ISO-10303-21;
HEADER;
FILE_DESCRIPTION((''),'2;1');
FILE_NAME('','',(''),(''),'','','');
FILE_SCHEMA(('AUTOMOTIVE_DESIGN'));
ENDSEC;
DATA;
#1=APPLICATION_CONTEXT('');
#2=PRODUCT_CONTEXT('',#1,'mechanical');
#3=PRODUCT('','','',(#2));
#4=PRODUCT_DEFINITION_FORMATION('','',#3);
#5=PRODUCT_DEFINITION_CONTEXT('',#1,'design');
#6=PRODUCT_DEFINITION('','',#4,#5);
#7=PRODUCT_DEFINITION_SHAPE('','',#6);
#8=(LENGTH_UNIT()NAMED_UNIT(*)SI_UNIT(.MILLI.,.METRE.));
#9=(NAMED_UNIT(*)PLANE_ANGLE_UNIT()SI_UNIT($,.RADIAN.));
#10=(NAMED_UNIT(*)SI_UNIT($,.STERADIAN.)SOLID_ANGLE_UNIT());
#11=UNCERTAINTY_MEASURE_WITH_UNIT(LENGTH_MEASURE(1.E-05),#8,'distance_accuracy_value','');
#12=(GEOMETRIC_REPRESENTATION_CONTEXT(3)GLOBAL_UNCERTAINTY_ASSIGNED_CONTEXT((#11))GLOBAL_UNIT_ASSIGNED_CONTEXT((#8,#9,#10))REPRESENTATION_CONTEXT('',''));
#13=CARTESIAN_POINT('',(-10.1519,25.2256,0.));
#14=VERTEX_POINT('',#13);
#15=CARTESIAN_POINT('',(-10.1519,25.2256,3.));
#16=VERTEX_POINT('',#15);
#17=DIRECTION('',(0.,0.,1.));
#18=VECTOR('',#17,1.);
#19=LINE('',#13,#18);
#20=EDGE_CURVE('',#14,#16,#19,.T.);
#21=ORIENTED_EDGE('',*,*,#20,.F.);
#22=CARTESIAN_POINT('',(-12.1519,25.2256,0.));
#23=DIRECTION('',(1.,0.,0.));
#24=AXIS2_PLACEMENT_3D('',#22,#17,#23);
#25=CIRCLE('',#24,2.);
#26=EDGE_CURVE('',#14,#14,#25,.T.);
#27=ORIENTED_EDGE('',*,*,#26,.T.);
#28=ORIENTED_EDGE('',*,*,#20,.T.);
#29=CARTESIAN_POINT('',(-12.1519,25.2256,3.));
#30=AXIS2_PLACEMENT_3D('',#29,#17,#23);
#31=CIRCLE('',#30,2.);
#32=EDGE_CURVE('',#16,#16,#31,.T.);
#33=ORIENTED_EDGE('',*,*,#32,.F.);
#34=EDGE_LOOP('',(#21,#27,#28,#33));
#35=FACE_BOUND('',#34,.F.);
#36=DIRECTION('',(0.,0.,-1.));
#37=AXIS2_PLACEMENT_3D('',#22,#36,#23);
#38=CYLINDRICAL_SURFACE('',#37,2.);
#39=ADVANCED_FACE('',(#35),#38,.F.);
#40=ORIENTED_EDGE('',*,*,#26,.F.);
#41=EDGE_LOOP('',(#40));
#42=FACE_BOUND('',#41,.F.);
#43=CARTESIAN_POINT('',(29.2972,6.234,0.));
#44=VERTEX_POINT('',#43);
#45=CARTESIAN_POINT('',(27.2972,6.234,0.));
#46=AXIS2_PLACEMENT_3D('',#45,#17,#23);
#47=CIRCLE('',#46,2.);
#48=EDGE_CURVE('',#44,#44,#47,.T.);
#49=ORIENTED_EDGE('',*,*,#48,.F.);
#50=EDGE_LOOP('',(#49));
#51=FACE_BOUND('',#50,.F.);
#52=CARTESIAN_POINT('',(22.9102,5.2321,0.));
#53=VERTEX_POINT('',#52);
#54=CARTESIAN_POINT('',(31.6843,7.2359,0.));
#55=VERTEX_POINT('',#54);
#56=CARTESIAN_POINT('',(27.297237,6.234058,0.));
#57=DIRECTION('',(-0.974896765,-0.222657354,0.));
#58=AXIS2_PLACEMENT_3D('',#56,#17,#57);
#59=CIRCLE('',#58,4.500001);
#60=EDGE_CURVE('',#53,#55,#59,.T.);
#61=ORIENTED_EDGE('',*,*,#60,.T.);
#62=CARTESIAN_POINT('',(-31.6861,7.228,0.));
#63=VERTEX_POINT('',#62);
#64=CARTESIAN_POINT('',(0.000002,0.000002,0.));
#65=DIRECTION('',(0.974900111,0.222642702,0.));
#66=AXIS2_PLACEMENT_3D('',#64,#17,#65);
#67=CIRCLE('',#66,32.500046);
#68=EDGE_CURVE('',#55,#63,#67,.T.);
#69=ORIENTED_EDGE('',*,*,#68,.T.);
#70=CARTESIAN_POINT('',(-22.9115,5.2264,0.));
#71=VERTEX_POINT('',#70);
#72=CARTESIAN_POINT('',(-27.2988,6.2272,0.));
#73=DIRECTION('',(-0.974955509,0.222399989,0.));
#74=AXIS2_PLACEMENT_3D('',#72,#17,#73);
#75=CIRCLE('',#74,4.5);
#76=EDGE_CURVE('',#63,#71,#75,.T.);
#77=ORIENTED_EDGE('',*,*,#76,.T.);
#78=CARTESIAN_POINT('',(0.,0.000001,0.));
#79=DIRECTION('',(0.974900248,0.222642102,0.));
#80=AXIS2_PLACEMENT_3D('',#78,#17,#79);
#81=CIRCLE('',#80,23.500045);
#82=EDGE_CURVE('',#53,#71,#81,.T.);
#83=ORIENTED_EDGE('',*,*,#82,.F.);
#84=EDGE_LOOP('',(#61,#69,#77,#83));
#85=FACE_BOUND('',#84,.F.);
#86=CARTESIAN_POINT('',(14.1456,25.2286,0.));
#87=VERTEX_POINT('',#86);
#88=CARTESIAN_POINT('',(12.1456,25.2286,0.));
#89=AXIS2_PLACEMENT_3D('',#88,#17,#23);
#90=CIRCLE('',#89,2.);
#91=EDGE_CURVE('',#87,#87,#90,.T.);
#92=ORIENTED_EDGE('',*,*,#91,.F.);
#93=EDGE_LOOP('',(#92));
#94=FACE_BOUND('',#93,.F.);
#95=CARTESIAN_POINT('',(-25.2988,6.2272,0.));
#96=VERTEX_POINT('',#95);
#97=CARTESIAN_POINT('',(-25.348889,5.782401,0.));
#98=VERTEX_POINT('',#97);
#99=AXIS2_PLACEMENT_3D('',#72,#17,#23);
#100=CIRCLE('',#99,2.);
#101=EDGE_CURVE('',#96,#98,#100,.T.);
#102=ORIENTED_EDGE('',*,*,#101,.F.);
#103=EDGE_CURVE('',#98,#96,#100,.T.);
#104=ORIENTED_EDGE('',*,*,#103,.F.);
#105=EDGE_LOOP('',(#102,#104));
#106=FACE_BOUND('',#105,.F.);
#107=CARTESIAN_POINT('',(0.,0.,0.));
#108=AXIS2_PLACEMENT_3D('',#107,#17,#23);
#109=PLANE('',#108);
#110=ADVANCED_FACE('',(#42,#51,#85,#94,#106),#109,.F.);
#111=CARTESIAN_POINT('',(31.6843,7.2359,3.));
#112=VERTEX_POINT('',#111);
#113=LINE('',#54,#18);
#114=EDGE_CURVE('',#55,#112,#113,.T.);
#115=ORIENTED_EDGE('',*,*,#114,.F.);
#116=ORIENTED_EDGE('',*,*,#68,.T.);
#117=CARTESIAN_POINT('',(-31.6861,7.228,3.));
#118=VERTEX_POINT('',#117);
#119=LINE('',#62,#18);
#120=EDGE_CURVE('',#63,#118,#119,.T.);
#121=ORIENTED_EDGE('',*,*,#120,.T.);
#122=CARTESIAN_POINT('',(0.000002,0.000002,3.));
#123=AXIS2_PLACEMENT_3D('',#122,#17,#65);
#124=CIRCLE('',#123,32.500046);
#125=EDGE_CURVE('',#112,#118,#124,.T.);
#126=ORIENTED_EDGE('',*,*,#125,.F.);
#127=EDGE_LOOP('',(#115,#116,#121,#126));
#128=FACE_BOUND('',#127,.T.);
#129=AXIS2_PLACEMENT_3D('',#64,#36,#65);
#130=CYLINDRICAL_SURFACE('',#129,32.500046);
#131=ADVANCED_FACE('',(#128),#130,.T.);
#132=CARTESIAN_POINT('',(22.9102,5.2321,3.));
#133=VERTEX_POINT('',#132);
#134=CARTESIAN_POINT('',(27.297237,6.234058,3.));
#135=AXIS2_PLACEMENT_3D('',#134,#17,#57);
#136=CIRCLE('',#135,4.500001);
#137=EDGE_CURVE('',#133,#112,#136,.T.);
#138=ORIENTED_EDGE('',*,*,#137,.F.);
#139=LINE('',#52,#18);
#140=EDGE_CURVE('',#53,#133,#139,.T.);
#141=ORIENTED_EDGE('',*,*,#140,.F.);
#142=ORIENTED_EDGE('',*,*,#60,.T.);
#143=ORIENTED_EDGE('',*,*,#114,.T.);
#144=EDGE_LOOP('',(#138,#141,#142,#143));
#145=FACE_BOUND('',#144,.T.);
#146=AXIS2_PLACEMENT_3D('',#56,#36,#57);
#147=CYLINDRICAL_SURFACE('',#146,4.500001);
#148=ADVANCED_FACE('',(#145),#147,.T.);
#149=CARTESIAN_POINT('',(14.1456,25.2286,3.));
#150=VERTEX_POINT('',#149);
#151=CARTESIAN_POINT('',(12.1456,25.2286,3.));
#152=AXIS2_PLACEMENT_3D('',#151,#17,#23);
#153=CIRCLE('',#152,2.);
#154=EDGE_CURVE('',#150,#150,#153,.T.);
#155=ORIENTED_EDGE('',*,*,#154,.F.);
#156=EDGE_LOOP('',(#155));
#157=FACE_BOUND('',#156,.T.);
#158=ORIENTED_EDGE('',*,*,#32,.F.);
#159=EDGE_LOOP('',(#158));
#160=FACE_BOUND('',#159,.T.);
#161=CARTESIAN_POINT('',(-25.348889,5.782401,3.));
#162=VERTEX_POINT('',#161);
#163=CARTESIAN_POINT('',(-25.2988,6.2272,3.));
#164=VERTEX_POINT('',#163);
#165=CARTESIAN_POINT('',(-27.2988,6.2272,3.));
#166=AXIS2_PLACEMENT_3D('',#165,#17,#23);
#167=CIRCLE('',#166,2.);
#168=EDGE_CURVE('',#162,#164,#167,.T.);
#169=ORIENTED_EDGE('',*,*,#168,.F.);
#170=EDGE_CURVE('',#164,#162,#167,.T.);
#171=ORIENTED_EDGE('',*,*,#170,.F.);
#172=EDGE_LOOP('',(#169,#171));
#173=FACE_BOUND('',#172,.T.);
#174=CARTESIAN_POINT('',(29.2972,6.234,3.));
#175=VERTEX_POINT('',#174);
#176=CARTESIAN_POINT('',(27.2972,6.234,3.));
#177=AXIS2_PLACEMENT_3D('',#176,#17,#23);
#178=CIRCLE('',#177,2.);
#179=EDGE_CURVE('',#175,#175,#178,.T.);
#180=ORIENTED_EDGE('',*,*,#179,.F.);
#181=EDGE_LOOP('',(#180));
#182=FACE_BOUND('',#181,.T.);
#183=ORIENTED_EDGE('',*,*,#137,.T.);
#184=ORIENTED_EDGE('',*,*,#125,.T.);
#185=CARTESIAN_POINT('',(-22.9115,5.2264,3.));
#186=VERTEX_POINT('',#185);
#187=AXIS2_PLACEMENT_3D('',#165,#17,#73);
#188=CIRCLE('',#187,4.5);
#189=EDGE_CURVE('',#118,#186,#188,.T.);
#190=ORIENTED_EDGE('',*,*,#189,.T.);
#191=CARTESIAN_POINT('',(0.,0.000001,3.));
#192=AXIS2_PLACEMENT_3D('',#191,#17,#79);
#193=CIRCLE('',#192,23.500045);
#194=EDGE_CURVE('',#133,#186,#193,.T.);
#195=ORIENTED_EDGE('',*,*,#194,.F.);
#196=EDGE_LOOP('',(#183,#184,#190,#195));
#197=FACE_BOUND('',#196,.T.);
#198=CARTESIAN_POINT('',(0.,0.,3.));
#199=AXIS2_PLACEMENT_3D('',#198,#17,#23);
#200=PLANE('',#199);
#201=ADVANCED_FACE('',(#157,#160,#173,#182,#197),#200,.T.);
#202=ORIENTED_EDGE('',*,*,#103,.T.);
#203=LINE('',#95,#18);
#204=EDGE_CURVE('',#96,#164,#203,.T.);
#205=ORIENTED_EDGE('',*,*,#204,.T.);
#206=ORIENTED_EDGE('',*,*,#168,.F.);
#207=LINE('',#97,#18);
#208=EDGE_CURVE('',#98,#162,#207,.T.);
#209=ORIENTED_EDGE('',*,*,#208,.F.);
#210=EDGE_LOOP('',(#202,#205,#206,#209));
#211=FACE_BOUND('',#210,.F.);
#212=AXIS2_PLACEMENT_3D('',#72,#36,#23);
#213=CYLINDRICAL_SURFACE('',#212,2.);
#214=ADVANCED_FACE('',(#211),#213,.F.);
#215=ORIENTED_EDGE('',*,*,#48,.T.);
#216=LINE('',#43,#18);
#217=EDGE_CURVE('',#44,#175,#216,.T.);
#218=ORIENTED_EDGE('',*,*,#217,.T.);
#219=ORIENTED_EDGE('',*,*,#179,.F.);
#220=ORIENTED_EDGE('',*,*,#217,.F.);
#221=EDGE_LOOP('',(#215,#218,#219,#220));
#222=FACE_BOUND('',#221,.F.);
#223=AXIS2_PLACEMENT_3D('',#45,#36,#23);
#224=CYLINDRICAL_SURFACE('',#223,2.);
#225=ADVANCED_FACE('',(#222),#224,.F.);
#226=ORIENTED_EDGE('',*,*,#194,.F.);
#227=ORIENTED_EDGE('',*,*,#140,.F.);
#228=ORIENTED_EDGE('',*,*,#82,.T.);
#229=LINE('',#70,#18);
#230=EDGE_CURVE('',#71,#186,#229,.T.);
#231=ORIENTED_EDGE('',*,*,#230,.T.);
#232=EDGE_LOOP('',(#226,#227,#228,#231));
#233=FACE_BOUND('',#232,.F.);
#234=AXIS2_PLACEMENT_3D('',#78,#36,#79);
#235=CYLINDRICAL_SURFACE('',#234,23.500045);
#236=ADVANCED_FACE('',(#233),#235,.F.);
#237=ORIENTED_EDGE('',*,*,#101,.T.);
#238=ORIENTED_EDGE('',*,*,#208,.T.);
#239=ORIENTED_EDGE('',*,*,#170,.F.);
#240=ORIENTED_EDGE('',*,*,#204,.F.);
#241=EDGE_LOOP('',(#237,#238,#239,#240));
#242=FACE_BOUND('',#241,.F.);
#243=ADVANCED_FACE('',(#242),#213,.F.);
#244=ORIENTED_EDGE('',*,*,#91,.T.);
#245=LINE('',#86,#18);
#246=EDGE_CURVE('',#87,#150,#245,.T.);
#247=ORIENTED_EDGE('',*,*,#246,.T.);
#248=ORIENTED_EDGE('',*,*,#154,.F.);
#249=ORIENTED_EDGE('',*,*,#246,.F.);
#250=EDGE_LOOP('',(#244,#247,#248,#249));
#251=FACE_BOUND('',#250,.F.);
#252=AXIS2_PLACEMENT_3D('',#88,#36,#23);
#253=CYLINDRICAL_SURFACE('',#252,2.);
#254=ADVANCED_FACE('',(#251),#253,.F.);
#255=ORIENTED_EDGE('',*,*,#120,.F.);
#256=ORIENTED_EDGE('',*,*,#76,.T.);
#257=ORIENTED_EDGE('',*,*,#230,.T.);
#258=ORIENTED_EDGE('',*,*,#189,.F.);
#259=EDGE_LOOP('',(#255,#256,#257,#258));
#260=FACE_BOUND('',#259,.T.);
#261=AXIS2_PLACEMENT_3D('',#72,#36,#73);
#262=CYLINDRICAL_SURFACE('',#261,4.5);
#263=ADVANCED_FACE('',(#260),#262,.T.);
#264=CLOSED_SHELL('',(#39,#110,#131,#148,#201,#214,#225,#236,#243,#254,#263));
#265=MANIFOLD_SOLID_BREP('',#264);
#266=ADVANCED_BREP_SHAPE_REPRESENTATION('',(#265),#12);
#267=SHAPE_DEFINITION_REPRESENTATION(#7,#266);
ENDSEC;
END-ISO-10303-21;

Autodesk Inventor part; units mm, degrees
ref_plane "YZ Plane" through (0, 0, 0) normal (1, 0, 0) x (0, 1, 0)
ref_plane "XZ Plane" through (0, 0, 0) normal (0, 1, 0) x (-1, 0, 0)
ref_plane "XY Plane" through (0, 0, 0) normal (0, 0, 1) x (1, 0, 0)
sketch "Sketch1" plane through (0, 0, 0) normal (0, 0, 1) x (1, 0, 0)
  circle A0 centre (27.2972, 6.234) radius 2
  circle A1 centre (12.1456, 25.2286) radius 2
  circle A2 centre (-12.1519, 25.2256) radius 2
  circle A3 centre (-27.2988, 6.2272) radius 2
  circle A4 centre (-21.8891, -17.4604) radius 2
  circle A5 centre (0.0035, -28) radius 2
  circle A6 centre (21.8935, -17.455) radius 2
  arc A7 (-18.3712, -14.6543) -> (-25.407, -20.2666) centre (-21.8891, -17.4604) ccw
  arc A8 (-31.6861, 7.228) -> (-22.9115, 5.2264) centre (-27.2988, 6.2272) ccw
  line L0 (0, 0) -> (-27.2988, 6.2272)
  line L1 (0, 0) -> (-28.0096, 0)
  arc A9 (22.9102, 5.2321) -> (31.6843, 7.2359) centre (27.2972, 6.234) ccw
  arc A10 (25.412, -20.2603) -> (18.3749, -14.6497) centre (21.8935, -17.455) ccw
  arc A11 (18.3162, -14.7229) -> (18.3749, -14.6497) centre (0, 0) ccw
  arc A12 (22.9102, 5.2321) -> (-22.9115, 5.2264) centre (0, 0) ccw
  arc A13 (25.3999, -20.2755) -> (25.412, -20.2603) centre (0, 0) ccw
  arc A14 (31.6843, 7.2359) -> (-31.6861, 7.228) centre (0, 0) ccw
  arc A15 (31.3012, -23.1554) -> (15.9051, -8.2279) centre (21.8935, -17.455) ccw
  line L2 (21.8935, -17.455) -> (20.255, -16.308)
  line L3 (18.0457, -14.7615) -> (15.8179, -13.202)
  line L4 (21.8935, -17.455) -> (23.0905, -19.0572)
  line L5 (25.3705, -22.1091) -> (26.3321, -23.3962)
  arc A16 (25.3999, -20.2755) -> (25.3705, -22.1091) centre (26.5722, -21.2113) ccw
  arc A17 (26.3321, -23.3962) -> (31.3012, -23.1554) centre (28.7355, -21.6007) ccw
  arc A18 (15.9051, -8.2279) -> (15.8179, -13.202) centre (17.5383, -10.7444) ccw
  arc A19 (18.0457, -14.7615) -> (18.3162, -14.7229) centre (18.1604, -14.5976) ccw
  point P0 (28.477, -26.2673)
  point P1 (12.8819, -11.1468)
  point P2 (18.1984, -14.8684)
  point P3 (24.6644, -21.164)
  dimension "d2" = 4
  dimension "d5" = 360
  dimension "d7" = 9
  dimension "d8" = 9
  dimension "d11" = 12.85
  dimension "d12" = 54.596
  dimension "d13" = 9
  dimension "d14" = 22
  dimension "d15" = 1.5
  dimension "d16" = 3
  dimension "d17" = 0.2
extrude "Extrusion1" add sketch "Sketch1" along normal blind 3 contours A14 A9 A12 A8
properties part number "fin entraineur mod"
